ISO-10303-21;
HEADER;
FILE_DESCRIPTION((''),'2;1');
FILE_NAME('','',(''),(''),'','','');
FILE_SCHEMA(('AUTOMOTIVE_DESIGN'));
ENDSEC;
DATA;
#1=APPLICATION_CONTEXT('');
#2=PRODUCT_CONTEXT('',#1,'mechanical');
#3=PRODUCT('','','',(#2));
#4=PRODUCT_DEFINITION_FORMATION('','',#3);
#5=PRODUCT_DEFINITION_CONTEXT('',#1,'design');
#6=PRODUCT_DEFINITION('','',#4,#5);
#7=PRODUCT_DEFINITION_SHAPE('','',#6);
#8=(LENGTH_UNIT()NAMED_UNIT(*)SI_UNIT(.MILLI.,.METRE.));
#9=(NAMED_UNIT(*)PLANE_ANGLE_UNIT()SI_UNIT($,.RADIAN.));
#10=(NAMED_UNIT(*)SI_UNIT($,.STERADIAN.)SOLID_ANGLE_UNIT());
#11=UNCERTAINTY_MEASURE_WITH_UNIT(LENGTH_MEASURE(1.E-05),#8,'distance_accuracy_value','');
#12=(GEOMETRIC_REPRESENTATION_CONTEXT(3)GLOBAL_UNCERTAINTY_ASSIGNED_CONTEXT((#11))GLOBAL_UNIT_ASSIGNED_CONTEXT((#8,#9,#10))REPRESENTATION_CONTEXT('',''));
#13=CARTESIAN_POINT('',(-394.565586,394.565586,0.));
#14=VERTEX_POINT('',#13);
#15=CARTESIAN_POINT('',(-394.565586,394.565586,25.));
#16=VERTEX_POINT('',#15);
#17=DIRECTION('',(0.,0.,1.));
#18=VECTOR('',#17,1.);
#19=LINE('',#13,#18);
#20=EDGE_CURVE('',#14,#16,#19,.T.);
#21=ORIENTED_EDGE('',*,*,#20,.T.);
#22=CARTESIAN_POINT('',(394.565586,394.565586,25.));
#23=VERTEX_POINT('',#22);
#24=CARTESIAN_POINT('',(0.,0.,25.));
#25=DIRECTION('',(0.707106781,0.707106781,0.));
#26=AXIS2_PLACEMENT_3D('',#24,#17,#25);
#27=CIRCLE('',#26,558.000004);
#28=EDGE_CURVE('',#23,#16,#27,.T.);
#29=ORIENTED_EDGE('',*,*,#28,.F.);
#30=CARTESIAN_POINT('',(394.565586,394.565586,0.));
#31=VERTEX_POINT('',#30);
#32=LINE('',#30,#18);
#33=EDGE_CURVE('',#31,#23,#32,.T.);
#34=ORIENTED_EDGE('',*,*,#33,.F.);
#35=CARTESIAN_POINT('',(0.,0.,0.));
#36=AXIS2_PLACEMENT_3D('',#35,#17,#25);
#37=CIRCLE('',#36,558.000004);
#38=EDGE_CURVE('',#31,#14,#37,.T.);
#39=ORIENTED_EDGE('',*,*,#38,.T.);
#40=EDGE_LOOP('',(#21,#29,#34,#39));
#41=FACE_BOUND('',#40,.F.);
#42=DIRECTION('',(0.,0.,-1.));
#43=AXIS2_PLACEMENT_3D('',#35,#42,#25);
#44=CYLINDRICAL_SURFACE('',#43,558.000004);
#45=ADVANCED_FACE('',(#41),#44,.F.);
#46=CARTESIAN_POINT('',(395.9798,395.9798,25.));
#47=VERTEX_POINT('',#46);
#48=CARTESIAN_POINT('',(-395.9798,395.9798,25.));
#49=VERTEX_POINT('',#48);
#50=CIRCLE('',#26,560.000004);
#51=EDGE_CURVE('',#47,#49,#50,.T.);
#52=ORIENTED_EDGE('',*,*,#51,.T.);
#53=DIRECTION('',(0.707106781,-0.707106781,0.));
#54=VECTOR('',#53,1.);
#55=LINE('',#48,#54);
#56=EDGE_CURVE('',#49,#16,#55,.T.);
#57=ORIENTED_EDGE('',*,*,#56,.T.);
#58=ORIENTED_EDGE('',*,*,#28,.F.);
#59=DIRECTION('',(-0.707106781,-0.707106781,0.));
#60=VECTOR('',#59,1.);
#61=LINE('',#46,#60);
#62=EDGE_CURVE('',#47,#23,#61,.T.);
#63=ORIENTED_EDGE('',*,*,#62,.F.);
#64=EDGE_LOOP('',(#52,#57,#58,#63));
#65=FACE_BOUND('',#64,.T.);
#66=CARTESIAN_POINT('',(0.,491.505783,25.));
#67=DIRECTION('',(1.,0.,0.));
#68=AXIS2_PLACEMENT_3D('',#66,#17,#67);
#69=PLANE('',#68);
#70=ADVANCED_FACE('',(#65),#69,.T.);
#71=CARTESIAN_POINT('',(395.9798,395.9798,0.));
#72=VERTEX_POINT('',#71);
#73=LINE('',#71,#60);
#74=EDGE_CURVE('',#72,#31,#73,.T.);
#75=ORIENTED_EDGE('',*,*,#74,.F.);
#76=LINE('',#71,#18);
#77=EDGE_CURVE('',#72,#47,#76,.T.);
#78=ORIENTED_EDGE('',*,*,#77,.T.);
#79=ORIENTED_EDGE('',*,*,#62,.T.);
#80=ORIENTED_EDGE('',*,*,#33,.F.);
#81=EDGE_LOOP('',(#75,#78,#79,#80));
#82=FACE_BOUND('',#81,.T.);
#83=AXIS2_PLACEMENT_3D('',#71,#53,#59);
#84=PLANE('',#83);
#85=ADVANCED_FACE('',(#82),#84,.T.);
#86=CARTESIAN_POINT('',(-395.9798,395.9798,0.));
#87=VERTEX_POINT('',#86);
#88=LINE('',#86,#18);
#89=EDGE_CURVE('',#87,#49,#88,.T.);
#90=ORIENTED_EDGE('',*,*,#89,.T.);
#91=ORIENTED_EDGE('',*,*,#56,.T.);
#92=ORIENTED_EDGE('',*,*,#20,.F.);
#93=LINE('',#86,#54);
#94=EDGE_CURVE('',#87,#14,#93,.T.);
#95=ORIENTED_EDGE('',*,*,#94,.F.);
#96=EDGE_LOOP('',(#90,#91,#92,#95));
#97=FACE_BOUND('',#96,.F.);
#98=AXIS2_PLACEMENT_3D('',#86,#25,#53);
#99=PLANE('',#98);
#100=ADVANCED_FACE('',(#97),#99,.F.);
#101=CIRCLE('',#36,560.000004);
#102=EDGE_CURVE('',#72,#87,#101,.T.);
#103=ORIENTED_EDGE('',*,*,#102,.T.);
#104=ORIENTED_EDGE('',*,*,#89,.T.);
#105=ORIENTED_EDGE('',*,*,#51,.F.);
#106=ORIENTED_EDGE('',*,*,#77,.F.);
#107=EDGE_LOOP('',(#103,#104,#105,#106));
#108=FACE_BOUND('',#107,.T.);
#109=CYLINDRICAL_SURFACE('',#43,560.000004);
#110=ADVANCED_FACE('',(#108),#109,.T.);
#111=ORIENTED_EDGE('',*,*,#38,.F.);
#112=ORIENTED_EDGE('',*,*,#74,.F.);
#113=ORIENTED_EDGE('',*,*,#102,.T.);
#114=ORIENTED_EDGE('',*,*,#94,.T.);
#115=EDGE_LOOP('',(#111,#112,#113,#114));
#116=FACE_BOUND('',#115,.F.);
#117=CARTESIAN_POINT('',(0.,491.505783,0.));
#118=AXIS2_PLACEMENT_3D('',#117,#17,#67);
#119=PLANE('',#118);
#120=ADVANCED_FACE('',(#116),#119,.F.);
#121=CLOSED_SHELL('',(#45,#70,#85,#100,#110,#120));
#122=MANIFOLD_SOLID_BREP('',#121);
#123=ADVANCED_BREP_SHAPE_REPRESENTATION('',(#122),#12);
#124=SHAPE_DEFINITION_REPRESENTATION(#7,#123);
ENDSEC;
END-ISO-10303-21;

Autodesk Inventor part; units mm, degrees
ref_plane "YZ Plane" through (0, 0, 0) normal (1, 0, 0) x (0, 1, 0)
ref_plane "XZ Plane" through (0, 0, 0) normal (0, 1, 0) x (-1, 0, 0)
ref_plane "XY Plane" through (0, 0, 0) normal (0, 0, 1) x (1, 0, 0)
sketch "Sketch1" plane through (0, 0, 0) normal (0, 0, 1) x (1, 0, 0)
  arc A0 (395.9798, 395.9798) -> (-395.9798, 395.9798) centre (0, 0) ccw
  line L0 (0, 0) -> (-395.9798, 395.9798) construction
  line L1 (0, 0) -> (0, 362.16) construction
  line L2 (0, 0) -> (395.9798, 395.9798) construction
  arc A1 (-395.9798, 395.9798) -> (395.9798, 395.9798) centre (0, 0) ccw construction
  point P0 (-311.7691, 180)
  point P1 (311.7691, 180)
  dimension "JacobiRadiusSize" = 2
  dimension "d28" = 1120
  dimension "d30" = 90
contour flange "Contour Flange1" sketch "Sketch1" thickness 2 bend radius 2 width 25 along (0, 0, 1) mid plane no both sides no wall seen from (0, 560, 0) lies toward (0, -1, 0) curves A0
bend "Bend1"
corner "Corner1"
equation "\"JacobiRadiusSize\" = BendRadius"
equation "\"d28\" = Шстр_диам_внутр"
equation "\"d31\" = Thickness"
equation "\"d32\" = BendReliefWidth"
equation "\"d33\" = BendReliefDepth"
equation "\"d34\" = MinimumRemnant"
equation "\"d35\" = TransitionRadius"
equation "\"d37\" = BendRadius"
equation "\"d39\" = CornerReliefSize"
equation "\"d40\" = GapSize"
equation "\"d41\" = JacobiRadiusSize"
equation "\"BendRadius\" = Thickness"
equation "\"BendReliefWidth\" = Thickness"
equation "\"BendReliefDepth\" = 0.5 * Thickness"
equation "\"CornerReliefSize\" = 4 * Thickness"
equation "\"MinimumRemnant\" = 2 * Thickness"
equation "\"TransitionRadius\" = BendRadius"
equation "\"GapSize\" = Thickness"
equation "\"Шстр_диам_внутр\" = 1120"
equation "\"Thickness\" = 2"
properties part number "DMF 2.1 01 44 Gear rim 4"
